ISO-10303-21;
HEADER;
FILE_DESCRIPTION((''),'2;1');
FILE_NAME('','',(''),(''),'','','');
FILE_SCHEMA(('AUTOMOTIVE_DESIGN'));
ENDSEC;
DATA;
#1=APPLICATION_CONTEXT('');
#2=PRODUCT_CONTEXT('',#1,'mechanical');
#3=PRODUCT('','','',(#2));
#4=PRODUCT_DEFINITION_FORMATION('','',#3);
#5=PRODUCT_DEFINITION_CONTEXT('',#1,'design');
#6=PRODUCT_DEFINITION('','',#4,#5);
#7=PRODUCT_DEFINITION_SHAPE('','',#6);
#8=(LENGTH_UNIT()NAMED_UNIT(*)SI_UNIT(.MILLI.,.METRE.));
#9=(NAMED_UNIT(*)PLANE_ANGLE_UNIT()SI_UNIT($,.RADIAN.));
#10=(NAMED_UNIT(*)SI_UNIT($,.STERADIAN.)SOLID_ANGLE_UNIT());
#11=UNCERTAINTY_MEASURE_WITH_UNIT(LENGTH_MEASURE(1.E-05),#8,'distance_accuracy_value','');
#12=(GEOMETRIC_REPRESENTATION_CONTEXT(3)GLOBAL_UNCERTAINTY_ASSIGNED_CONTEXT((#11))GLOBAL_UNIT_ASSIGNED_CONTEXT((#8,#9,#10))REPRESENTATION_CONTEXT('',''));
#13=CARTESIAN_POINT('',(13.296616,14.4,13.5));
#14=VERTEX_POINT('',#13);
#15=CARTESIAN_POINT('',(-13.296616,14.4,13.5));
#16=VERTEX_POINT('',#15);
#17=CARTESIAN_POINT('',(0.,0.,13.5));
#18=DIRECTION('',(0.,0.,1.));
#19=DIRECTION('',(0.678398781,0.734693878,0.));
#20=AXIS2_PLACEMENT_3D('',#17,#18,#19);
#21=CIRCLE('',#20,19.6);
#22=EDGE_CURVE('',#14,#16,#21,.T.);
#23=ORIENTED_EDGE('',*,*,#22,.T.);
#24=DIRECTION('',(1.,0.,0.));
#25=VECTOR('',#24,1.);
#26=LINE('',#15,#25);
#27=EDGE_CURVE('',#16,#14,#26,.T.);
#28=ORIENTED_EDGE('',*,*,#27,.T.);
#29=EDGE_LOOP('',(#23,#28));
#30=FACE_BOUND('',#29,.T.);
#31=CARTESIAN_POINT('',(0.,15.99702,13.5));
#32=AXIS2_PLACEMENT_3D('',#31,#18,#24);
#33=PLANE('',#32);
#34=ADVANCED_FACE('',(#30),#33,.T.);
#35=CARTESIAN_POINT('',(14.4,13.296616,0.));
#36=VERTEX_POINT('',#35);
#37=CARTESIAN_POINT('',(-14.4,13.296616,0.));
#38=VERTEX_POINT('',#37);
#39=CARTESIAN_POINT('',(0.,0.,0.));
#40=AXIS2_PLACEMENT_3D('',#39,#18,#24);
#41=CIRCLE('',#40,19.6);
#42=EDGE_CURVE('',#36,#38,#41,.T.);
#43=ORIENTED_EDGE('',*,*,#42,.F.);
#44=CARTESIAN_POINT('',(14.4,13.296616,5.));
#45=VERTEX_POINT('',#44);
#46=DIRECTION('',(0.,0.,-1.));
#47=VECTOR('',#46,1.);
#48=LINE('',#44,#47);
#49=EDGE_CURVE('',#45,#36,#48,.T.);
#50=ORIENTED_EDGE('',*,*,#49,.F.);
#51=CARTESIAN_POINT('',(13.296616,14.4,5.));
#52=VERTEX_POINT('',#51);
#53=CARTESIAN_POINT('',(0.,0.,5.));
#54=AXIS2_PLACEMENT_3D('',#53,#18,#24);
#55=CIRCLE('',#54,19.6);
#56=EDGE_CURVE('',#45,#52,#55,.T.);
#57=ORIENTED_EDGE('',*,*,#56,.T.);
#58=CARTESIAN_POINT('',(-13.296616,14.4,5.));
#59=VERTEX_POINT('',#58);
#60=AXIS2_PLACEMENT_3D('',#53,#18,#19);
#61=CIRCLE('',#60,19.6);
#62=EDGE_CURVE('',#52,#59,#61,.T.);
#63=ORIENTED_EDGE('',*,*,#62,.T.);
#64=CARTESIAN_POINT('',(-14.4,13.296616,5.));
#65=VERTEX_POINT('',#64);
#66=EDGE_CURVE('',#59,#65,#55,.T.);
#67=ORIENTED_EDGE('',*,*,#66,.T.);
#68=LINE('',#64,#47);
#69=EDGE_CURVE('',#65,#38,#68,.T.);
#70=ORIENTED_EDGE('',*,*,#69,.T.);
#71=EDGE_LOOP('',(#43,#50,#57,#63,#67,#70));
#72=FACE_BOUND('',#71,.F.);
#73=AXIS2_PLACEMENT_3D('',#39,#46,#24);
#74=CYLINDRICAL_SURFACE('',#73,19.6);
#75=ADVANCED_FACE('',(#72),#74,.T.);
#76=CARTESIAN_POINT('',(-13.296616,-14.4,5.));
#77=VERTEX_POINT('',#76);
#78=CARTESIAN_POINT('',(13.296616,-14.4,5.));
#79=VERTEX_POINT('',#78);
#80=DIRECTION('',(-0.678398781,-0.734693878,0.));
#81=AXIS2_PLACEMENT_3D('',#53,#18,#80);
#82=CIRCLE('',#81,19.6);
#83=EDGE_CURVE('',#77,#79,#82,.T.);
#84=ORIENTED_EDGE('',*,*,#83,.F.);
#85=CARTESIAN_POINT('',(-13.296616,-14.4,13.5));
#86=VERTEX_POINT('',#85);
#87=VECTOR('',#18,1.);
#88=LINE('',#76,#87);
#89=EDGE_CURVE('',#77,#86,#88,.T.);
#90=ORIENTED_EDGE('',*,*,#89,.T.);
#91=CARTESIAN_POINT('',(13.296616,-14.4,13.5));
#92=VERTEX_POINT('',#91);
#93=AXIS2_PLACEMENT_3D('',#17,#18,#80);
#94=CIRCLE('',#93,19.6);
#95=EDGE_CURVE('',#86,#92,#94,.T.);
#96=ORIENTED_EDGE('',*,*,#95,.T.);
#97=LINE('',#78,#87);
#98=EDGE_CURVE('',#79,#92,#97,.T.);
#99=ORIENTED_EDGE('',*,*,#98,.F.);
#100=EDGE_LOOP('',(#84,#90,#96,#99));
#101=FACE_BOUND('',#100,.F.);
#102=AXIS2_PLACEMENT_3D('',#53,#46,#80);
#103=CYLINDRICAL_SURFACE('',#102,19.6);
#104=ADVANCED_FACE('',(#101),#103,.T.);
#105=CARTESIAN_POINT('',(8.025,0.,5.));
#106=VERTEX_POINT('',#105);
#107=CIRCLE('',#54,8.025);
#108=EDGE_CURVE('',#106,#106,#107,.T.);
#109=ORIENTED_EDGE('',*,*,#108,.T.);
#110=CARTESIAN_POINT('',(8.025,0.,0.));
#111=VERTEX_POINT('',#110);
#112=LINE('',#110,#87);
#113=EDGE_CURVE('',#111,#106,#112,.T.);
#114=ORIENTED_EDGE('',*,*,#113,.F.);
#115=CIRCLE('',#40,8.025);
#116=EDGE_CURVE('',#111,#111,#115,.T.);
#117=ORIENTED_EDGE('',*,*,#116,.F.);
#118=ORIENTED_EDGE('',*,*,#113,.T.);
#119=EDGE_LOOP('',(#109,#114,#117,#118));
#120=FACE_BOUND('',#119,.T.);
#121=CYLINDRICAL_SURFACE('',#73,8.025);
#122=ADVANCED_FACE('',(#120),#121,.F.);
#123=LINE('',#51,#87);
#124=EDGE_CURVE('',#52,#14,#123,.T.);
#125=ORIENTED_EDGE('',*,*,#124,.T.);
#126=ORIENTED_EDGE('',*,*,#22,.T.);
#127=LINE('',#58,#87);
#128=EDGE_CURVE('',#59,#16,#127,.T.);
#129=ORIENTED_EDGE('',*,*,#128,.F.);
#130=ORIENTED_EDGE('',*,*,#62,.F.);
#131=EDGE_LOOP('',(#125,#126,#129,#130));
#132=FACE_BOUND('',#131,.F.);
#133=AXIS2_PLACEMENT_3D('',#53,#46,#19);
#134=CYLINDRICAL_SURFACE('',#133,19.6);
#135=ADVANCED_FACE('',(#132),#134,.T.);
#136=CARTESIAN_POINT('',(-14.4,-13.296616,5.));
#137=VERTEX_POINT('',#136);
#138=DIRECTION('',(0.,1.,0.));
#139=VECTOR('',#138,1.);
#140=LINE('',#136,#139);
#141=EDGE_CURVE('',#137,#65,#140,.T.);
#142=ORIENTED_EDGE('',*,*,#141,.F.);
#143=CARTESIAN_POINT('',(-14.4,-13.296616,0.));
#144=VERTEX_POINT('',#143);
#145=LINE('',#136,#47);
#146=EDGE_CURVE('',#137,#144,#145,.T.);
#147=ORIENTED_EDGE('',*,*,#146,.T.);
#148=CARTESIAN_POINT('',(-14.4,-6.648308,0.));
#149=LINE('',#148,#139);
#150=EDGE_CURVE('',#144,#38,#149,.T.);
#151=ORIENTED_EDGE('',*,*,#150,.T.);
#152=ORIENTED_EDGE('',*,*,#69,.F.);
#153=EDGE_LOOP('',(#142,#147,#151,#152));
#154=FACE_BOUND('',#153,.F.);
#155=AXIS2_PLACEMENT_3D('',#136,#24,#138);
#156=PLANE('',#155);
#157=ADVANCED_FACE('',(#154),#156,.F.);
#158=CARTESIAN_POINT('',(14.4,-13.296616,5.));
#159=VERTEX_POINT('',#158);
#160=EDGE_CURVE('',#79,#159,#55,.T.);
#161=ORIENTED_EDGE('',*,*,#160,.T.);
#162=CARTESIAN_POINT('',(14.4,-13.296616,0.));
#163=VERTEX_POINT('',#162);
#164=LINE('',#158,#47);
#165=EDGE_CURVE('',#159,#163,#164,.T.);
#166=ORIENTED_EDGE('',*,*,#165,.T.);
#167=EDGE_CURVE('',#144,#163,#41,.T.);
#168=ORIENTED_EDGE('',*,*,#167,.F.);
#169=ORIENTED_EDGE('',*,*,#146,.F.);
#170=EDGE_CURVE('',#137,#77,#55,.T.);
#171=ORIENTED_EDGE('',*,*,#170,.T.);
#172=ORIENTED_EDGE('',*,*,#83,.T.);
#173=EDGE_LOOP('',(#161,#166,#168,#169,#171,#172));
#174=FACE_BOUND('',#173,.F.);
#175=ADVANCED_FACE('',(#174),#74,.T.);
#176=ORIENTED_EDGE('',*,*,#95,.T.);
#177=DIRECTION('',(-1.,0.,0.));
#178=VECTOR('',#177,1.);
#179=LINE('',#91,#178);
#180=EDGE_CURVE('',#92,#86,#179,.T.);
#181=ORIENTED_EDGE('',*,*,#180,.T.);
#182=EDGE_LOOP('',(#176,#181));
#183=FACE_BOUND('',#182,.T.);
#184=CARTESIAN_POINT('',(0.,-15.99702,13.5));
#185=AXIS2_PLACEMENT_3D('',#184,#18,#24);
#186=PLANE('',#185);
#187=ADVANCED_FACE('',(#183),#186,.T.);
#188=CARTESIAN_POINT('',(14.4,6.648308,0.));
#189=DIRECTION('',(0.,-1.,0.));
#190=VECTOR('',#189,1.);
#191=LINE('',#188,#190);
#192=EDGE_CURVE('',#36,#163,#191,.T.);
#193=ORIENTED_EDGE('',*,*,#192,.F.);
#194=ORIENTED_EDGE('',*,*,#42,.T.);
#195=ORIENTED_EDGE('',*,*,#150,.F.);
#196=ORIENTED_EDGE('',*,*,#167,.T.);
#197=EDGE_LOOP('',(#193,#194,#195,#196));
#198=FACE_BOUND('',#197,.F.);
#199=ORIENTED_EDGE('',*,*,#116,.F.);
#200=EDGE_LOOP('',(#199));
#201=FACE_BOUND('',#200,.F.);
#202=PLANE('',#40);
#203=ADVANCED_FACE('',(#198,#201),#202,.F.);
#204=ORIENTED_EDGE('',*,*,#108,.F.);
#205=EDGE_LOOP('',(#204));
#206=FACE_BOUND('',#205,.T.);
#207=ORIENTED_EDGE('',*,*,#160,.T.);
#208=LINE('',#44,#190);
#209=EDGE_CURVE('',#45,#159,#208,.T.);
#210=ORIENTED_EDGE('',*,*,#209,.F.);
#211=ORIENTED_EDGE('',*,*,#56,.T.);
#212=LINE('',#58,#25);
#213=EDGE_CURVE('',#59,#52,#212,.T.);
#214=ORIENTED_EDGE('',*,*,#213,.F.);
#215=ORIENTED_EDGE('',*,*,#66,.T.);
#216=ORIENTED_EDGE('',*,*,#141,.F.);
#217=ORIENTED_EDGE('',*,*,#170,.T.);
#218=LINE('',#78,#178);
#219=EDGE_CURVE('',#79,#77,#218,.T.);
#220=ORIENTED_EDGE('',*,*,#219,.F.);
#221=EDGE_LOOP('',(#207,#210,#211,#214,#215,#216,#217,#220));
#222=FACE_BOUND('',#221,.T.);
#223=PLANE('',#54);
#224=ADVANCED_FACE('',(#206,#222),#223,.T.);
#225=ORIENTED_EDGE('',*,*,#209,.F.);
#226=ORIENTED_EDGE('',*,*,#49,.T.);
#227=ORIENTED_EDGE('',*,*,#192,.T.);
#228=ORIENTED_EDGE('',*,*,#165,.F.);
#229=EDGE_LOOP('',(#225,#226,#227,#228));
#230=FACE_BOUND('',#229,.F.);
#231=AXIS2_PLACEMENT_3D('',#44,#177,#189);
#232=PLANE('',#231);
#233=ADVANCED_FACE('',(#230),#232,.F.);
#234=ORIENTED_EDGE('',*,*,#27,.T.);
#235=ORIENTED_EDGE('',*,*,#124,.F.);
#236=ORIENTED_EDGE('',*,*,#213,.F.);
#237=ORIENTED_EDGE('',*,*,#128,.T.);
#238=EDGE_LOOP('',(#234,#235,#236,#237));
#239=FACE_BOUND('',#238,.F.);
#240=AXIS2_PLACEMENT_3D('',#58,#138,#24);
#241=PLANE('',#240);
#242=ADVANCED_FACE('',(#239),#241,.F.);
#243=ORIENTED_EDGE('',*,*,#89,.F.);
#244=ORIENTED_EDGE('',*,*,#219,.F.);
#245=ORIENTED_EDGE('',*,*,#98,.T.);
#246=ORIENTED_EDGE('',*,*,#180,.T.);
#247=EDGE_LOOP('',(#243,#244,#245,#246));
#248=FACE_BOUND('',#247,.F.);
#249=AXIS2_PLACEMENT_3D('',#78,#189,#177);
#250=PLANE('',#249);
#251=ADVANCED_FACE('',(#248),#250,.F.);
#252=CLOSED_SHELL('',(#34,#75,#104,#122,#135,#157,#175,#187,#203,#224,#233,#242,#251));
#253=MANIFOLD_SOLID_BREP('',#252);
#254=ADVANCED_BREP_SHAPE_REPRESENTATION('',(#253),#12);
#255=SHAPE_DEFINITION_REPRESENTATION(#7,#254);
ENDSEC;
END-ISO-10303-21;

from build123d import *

# Parameters (mm, degrees)
F0_R     = 19.6
F0_R_2   = 8.025
F1_DEPTH = 5
F3_DEPTH = 8.5
F4_DEPTH = 5.001


with BuildPart() as f1:
    # F0 (on Top) → F1 (new body)
    with BuildSketch(Plane.XY):
        Circle(F0_R)
        Circle(F0_R_2, mode=Mode.SUBTRACT)
    extrude(amount=F1_DEPTH)

    # F2 (on face) → F3 (join)
    with BuildSketch(Plane.XY.offset(5)):
        with BuildLine():
            ThreePointArc((-13.2966161109, -14.4), (0, -19.6), (13.2966161109, -14.4))
            Line((13.2966161109, -14.4), (-13.2966161109, -14.4))
        make_face()
        with BuildLine():
            Line((-13.2966161109, 14.4), (13.2966161109, 14.4))
            ThreePointArc((13.2966161109, 14.4), (0, 19.6), (-13.2966161109, 14.4))
        make_face()
    extrude(amount=F3_DEPTH)

    # F2 (on face) → F4 (cut, through all)
    with BuildSketch(Plane.XY.offset(5)):
        with BuildLine():
            ThreePointArc((-14.4, 13.2966161109), (-19.6, 0), (-14.4, -13.2966161109))
            Line((-14.4, -13.2966161109), (-14.4, 13.2966161109))
        make_face()
        with BuildLine():
            Line((14.4, 13.2966161109), (14.4, -13.2966161109))
            ThreePointArc((14.4, -13.2966161109), (18.2537667346, -7.138627319), (19.6, 0))
            ThreePointArc((19.6, 0), (18.2537667346, 7.138627319), (14.4, 13.2966161109))
        make_face()
    extrude(amount=-F4_DEPTH, mode=Mode.SUBTRACT)


solid = f1.part
